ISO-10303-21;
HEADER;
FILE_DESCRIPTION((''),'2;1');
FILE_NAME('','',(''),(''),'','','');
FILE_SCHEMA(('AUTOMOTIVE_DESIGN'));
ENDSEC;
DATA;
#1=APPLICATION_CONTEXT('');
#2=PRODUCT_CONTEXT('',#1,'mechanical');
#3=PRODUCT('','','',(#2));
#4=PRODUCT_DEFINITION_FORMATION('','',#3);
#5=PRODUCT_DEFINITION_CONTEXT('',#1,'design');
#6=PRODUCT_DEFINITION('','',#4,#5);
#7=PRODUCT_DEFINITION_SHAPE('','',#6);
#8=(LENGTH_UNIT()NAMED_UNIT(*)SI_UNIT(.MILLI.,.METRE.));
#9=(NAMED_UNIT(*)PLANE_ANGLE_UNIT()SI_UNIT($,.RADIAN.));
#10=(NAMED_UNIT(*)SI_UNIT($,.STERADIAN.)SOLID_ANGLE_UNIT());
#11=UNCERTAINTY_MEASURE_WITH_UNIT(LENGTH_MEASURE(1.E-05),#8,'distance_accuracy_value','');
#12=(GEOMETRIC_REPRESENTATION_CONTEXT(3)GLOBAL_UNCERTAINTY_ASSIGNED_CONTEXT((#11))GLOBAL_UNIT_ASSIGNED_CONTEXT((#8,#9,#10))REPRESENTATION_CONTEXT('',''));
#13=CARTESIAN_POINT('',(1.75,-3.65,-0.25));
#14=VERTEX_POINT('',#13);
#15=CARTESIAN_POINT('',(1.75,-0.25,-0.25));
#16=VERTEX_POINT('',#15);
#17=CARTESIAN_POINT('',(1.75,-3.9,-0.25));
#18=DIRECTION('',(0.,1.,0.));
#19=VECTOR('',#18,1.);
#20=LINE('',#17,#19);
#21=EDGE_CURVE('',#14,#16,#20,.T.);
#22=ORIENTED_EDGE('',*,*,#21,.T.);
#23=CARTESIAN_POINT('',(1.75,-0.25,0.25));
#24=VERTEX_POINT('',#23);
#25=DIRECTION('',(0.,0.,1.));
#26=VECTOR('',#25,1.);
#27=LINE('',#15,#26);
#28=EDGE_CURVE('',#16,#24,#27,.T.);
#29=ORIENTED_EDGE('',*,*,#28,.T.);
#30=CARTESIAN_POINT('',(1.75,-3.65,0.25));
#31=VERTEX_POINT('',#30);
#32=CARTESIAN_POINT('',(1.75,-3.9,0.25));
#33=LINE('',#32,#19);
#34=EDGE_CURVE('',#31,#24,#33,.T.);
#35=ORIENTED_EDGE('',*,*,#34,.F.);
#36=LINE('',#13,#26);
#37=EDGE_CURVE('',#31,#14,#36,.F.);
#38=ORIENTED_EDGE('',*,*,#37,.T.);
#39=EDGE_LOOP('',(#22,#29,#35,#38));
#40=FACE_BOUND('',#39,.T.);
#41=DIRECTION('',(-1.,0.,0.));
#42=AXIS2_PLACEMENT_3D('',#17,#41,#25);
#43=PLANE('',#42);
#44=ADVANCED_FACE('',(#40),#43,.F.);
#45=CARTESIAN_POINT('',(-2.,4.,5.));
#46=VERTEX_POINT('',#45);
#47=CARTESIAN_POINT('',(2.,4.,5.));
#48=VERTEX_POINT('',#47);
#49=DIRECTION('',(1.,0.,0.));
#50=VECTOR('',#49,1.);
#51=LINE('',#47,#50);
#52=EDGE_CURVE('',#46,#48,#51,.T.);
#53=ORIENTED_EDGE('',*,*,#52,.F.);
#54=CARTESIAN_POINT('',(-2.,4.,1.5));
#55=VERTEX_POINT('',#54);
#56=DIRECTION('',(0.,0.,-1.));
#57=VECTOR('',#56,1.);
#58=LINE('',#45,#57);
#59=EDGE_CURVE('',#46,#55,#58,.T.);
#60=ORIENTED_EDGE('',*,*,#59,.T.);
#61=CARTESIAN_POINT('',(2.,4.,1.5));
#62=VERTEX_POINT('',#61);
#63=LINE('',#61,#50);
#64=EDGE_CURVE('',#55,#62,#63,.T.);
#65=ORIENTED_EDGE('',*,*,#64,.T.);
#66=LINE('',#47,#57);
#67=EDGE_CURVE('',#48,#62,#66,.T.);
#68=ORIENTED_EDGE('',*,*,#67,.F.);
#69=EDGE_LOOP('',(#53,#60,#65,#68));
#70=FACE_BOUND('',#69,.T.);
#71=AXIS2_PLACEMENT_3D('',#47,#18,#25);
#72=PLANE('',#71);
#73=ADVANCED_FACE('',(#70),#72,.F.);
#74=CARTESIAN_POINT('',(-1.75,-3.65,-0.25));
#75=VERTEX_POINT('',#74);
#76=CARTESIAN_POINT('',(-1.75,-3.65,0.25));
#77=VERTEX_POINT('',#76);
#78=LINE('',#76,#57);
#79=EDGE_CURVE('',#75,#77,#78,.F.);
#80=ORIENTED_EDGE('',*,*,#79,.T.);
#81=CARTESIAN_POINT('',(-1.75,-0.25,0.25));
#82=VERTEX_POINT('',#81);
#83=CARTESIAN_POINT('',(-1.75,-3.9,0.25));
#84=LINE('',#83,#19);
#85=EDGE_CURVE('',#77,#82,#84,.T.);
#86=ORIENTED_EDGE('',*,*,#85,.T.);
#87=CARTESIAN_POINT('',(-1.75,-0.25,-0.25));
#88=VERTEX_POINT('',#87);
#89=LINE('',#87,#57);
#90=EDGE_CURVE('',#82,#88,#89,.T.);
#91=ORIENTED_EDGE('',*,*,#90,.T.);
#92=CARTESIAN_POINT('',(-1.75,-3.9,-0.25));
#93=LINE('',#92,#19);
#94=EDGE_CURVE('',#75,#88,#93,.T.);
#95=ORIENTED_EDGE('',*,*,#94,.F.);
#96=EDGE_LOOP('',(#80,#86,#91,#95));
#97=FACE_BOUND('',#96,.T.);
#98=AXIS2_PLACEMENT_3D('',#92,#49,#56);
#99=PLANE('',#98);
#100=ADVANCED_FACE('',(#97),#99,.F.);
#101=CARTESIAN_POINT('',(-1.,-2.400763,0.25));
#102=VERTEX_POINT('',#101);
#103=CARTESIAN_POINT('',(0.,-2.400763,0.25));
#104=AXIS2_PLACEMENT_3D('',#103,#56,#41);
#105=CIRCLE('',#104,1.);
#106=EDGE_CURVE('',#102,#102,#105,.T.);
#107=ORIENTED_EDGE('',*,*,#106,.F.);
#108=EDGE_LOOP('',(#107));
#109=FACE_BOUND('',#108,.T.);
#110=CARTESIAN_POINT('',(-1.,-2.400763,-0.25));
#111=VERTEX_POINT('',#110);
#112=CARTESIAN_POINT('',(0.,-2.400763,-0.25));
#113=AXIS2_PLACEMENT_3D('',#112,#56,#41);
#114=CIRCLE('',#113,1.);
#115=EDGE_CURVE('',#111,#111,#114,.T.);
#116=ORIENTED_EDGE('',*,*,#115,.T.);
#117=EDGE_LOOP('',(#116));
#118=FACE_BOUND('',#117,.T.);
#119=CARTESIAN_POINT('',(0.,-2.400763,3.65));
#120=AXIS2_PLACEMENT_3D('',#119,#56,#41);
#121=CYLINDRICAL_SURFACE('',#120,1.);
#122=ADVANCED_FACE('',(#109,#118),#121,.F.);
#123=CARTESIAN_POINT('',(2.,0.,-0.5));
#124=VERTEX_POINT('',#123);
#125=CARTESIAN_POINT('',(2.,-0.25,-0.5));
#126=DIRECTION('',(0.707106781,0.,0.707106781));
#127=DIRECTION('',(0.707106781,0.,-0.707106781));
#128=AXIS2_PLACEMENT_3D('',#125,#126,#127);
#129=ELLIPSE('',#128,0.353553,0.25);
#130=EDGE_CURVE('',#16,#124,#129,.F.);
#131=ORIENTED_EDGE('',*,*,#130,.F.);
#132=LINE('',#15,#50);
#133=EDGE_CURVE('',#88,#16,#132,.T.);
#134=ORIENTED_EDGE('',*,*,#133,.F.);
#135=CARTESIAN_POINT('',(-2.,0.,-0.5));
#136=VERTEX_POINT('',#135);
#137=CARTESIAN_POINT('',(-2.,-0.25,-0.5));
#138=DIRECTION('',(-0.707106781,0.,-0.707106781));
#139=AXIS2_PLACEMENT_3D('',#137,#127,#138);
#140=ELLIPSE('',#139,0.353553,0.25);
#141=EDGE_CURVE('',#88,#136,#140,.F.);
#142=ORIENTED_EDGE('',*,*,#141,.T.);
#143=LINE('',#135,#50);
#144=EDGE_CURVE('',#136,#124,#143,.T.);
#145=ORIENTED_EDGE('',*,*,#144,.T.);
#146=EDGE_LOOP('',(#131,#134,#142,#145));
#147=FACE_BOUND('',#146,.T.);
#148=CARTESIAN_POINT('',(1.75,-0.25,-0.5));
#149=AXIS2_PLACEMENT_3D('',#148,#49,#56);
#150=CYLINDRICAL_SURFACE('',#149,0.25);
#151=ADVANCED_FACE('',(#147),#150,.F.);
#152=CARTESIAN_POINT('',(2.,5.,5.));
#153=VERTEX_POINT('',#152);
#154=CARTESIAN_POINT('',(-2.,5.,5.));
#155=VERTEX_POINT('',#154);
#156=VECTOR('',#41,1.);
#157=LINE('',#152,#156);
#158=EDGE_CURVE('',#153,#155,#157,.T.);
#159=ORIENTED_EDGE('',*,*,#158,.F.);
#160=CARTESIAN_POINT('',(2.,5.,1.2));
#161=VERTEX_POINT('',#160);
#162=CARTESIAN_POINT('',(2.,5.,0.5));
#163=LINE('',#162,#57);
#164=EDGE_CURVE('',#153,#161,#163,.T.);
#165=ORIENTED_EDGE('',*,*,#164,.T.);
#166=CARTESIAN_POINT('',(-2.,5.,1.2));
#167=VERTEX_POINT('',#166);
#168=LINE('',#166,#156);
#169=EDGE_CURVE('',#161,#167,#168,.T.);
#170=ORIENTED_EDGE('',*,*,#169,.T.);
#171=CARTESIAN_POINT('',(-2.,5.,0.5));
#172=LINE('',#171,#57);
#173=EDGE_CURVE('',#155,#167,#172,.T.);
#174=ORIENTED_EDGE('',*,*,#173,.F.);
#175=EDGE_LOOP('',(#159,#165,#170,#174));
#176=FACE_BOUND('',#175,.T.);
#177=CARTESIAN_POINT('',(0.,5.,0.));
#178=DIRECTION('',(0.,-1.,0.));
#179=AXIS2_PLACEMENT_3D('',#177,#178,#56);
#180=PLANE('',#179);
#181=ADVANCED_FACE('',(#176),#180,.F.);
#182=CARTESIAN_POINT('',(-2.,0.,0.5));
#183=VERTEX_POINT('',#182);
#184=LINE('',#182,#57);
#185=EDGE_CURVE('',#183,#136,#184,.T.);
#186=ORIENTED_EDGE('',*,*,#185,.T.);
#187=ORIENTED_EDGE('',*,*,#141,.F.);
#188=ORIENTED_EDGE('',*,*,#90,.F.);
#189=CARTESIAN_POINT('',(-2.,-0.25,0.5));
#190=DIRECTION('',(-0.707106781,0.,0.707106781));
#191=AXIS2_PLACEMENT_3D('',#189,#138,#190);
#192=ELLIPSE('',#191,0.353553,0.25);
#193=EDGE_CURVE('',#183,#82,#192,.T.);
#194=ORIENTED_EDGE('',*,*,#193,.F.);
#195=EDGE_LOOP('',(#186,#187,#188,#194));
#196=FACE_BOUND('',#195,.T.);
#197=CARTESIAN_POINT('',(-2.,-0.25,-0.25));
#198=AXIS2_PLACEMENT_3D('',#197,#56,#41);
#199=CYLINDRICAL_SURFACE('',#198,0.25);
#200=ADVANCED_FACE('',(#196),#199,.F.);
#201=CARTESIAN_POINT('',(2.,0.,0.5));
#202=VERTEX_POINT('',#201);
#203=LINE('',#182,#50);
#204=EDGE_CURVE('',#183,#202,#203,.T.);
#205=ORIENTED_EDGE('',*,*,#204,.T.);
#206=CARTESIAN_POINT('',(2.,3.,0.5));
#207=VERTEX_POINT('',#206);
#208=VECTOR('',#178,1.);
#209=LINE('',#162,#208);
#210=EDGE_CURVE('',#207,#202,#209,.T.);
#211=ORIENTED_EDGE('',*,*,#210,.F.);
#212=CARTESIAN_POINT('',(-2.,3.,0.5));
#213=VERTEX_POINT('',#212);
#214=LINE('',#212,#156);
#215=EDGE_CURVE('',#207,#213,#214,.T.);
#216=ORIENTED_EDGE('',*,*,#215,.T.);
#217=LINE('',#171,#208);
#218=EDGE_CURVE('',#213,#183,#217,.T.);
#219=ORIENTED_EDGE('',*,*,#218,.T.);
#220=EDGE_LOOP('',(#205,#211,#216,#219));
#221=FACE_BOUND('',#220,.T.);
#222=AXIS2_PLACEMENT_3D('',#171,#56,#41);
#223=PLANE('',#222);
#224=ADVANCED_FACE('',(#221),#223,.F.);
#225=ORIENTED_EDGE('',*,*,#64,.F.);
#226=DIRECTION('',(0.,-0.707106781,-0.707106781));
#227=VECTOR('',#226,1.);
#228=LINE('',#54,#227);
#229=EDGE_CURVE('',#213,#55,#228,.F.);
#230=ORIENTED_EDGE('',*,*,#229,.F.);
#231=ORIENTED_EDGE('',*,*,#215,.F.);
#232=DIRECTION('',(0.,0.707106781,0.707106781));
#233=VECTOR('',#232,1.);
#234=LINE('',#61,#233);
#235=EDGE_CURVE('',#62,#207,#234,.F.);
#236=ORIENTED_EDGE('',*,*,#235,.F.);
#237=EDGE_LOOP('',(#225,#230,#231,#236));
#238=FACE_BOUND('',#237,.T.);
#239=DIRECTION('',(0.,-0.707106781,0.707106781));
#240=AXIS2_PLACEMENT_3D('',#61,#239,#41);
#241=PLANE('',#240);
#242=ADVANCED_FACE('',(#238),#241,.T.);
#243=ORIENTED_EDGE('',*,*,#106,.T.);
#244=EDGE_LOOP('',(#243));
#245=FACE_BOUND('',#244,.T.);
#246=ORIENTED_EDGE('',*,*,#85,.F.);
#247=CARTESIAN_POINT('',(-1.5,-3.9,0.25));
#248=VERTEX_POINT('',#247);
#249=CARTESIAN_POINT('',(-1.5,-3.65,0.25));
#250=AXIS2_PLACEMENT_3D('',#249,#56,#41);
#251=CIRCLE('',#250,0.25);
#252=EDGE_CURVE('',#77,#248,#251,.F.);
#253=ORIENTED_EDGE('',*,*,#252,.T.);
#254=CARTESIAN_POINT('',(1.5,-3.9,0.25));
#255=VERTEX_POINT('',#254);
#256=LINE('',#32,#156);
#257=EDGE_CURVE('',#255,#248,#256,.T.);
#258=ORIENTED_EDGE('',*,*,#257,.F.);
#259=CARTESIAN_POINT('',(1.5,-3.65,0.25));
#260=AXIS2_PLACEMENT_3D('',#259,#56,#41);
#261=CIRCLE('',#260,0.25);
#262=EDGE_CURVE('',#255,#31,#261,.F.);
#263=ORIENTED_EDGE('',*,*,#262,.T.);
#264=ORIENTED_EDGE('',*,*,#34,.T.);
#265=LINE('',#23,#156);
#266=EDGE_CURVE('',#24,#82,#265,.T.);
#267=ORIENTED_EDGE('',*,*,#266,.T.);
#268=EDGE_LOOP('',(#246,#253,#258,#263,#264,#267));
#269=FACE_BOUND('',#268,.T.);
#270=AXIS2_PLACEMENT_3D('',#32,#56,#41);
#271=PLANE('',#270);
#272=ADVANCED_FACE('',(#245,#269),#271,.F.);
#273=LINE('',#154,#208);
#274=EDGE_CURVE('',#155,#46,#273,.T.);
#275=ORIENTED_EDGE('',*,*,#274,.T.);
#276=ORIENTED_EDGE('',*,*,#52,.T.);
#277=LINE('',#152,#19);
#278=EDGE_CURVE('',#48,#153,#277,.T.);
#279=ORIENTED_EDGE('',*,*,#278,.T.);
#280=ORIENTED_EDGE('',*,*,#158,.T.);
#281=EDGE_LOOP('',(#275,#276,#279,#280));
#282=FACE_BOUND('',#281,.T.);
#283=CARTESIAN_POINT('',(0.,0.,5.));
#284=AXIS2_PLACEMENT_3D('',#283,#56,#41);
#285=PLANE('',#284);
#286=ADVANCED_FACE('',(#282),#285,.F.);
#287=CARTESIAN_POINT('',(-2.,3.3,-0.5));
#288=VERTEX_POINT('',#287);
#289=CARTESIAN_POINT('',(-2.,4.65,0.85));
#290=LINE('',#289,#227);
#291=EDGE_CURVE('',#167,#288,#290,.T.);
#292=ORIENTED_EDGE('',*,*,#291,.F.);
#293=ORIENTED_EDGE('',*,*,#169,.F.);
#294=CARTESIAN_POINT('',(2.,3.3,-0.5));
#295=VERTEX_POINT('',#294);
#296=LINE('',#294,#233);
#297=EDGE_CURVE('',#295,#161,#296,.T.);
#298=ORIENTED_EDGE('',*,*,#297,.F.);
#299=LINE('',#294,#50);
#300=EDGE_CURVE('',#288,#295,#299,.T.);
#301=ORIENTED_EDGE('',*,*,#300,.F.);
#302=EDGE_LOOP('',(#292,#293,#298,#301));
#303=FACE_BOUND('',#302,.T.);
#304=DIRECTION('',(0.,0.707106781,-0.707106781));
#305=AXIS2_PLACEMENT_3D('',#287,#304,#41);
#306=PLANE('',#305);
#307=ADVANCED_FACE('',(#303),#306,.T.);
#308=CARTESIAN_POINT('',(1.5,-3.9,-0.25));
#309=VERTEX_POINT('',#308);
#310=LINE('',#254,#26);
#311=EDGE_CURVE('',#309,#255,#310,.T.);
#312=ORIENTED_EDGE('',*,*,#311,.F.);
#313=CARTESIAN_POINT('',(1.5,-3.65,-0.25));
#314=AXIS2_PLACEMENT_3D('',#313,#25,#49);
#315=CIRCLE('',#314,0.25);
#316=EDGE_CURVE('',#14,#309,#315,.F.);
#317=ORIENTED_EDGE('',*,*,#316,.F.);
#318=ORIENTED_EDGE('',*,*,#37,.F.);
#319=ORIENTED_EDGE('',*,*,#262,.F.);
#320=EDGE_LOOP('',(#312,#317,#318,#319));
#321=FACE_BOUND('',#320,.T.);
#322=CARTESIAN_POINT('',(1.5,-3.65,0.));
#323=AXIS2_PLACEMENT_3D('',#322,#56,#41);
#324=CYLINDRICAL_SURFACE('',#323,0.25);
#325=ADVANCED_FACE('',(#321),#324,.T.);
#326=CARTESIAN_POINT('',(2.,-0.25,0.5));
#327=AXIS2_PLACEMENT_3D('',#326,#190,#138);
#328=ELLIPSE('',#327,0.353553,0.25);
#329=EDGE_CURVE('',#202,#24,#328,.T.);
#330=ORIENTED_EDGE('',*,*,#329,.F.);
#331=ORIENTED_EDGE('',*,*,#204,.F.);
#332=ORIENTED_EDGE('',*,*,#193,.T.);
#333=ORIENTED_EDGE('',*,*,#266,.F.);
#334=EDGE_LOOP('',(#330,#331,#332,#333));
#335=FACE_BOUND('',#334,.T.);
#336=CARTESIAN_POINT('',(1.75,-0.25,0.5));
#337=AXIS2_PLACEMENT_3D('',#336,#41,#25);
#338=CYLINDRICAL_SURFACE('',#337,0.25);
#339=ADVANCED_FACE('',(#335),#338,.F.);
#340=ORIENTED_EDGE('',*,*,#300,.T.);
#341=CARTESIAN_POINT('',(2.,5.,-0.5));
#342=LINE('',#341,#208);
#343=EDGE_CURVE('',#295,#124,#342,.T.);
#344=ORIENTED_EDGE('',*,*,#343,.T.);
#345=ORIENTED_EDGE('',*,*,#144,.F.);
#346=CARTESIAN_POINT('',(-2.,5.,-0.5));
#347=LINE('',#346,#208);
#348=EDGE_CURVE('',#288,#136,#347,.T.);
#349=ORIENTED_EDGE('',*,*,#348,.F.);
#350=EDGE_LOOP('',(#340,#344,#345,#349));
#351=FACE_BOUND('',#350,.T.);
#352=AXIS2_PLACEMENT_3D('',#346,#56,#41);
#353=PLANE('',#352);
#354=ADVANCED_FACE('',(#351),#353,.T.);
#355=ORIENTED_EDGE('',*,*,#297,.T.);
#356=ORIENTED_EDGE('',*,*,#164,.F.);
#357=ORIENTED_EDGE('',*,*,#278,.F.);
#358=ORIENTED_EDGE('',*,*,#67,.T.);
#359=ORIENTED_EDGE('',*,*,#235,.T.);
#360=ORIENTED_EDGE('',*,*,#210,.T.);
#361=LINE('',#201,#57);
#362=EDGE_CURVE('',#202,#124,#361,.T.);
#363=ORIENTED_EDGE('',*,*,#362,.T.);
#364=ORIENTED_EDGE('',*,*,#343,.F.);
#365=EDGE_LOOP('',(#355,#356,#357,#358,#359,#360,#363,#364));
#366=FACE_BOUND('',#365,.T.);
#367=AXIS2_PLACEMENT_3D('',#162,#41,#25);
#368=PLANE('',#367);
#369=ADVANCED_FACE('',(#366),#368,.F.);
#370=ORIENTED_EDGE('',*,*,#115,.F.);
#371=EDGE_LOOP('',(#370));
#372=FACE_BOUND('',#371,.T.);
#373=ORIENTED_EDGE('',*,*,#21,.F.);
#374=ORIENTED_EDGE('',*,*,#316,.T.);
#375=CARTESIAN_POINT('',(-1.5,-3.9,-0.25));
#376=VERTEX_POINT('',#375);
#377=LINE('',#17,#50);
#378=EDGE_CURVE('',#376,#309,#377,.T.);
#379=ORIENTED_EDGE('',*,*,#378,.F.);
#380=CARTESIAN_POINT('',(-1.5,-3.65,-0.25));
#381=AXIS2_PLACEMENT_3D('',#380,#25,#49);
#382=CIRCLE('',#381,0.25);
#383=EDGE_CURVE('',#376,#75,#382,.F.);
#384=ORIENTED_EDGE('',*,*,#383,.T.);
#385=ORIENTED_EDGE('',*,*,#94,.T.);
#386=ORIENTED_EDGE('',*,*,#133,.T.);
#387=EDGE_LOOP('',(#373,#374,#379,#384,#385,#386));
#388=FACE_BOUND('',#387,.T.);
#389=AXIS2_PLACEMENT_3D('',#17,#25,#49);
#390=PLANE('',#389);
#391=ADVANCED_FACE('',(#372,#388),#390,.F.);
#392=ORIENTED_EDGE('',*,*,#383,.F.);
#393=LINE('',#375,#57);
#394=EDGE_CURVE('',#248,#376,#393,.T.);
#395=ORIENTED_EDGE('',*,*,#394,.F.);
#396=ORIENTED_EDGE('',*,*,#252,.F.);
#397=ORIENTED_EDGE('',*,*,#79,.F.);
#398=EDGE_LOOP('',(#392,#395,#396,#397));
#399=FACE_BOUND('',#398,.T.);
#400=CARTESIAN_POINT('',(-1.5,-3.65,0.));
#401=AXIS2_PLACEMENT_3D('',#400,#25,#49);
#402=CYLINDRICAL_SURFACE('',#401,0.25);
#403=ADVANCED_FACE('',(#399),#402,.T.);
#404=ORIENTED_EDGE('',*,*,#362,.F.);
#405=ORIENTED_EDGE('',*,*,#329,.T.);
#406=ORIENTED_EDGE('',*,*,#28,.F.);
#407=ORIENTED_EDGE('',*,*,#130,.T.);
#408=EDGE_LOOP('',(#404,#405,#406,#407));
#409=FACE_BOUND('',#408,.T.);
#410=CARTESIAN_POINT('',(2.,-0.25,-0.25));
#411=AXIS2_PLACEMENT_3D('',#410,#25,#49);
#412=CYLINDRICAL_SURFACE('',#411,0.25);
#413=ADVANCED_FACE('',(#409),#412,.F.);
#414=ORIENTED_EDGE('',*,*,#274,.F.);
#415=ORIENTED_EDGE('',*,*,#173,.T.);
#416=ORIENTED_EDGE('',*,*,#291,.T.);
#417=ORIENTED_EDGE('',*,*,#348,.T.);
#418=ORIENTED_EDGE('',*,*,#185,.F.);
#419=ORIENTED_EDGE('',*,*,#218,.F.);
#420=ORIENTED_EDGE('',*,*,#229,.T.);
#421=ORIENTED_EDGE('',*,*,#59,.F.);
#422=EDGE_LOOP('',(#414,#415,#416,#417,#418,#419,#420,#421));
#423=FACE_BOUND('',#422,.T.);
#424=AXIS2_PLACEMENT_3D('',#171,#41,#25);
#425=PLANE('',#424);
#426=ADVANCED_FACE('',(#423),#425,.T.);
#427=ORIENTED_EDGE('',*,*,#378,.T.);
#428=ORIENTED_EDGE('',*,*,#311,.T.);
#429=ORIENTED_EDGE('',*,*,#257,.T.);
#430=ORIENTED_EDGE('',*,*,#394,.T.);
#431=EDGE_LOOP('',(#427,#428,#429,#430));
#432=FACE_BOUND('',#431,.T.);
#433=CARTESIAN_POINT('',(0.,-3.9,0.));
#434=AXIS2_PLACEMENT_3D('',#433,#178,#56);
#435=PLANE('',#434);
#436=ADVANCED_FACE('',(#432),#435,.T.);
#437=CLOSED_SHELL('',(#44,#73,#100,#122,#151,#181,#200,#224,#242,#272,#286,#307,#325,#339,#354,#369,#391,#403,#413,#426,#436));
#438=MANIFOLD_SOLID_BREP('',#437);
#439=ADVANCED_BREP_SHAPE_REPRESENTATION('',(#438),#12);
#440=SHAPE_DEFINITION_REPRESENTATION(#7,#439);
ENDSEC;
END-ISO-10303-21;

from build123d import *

# Parameters (mm, degrees)
SZKIC1_W                    = 4
SZKIC1_H                    = 1
DODANIE_WYCI_GNI_CIE5_DEPTH = 5
SZKIC6_W                    = 4
SZKIC6_H                    = 1
DODANIE_WYCI_GNI_CIE6_DEPTH = 4.5
SFAZOWANIE2_SIZE            = 1
SFAZOWANIE4_SIZE            = 1.7
SZKIC13_W                   = 3.5
SZKIC13_H                   = 0.5
DODANIE_WYCI_GNI_CIE7_DEPTH = 3.9
ZAOKR_GLENIE1_R             = 0.25
SZKIC14_R                   = 1
WYTNIJ_WYCI_GNI_CIE1_DEPTH  = 3.9
ZAOKR_GLENIE2_R             = 0.25


with BuildPart() as part:
    # Szkic1 → Dodanie-wyciągnięcie5 (new body)
    with BuildSketch(Plane(origin=(0, 0, 0), x_dir=(1, 0, 0), z_dir=(0, 1, 0))):
        Rectangle(SZKIC1_W, SZKIC1_H)
    extrude(amount=DODANIE_WYCI_GNI_CIE5_DEPTH)

    # Szkic6 → Dodanie-wyciągnięcie6 (add)
    with BuildSketch(Plane.XY.offset(0.5)):
        with Locations((0, 4.5)):
            Rectangle(SZKIC6_W, SZKIC6_H)
    extrude(amount=DODANIE_WYCI_GNI_CIE6_DEPTH)

    # Sfazowanie2
    sfazowanie2_edges = [part.edges().sort_by_distance(p)[0] for p in [
        (0, 4, 0.5),
    ]]
    chamfer(sfazowanie2_edges, length=SFAZOWANIE2_SIZE)

    # Sfazowanie4
    sfazowanie4_edges = [part.edges().sort_by_distance(p)[0] for p in [
        (0, 5, -0.5),
    ]]
    chamfer(sfazowanie4_edges, length=SFAZOWANIE4_SIZE)

    # Szkic13 → Dodanie-wyciągnięcie7 (add)
    with BuildSketch(Plane.XZ):
        Rectangle(SZKIC13_W, SZKIC13_H)
    extrude(amount=DODANIE_WYCI_GNI_CIE7_DEPTH)

    # Zaokrąglenie1
    zaokr_glenie1_edges = [part.edges().sort_by_distance(p)[0] for p in [
        (-1.75, 0, 0),
        (0, 0, -0.25),
        (1.75, 0, 0),
        (0, 0, 0.25),
    ]]
    fillet(zaokr_glenie1_edges, radius=ZAOKR_GLENIE1_R - 0.0001)  # a hair under: the kernel refuses the full size

    # Szkic14 → Wytnij-wyciągnięcie1 (cut)
    with BuildSketch(Plane(origin=(0, 0, -0.25), x_dir=(-1, 0, 0), z_dir=(0, 0, -1))):
        with Locations((0, -2.400763045)):
            Circle(SZKIC14_R)
    extrude(amount=-WYTNIJ_WYCI_GNI_CIE1_DEPTH, mode=Mode.SUBTRACT)

    # Zaokrąglenie2
    zaokr_glenie2_edges = [part.edges().sort_by_distance(p)[0] for p in [
        (-1.75, -3.9, 0),
        (1.75, -3.9, 0),
    ]]
    fillet(zaokr_glenie2_edges, radius=ZAOKR_GLENIE2_R)


solid = part.part
